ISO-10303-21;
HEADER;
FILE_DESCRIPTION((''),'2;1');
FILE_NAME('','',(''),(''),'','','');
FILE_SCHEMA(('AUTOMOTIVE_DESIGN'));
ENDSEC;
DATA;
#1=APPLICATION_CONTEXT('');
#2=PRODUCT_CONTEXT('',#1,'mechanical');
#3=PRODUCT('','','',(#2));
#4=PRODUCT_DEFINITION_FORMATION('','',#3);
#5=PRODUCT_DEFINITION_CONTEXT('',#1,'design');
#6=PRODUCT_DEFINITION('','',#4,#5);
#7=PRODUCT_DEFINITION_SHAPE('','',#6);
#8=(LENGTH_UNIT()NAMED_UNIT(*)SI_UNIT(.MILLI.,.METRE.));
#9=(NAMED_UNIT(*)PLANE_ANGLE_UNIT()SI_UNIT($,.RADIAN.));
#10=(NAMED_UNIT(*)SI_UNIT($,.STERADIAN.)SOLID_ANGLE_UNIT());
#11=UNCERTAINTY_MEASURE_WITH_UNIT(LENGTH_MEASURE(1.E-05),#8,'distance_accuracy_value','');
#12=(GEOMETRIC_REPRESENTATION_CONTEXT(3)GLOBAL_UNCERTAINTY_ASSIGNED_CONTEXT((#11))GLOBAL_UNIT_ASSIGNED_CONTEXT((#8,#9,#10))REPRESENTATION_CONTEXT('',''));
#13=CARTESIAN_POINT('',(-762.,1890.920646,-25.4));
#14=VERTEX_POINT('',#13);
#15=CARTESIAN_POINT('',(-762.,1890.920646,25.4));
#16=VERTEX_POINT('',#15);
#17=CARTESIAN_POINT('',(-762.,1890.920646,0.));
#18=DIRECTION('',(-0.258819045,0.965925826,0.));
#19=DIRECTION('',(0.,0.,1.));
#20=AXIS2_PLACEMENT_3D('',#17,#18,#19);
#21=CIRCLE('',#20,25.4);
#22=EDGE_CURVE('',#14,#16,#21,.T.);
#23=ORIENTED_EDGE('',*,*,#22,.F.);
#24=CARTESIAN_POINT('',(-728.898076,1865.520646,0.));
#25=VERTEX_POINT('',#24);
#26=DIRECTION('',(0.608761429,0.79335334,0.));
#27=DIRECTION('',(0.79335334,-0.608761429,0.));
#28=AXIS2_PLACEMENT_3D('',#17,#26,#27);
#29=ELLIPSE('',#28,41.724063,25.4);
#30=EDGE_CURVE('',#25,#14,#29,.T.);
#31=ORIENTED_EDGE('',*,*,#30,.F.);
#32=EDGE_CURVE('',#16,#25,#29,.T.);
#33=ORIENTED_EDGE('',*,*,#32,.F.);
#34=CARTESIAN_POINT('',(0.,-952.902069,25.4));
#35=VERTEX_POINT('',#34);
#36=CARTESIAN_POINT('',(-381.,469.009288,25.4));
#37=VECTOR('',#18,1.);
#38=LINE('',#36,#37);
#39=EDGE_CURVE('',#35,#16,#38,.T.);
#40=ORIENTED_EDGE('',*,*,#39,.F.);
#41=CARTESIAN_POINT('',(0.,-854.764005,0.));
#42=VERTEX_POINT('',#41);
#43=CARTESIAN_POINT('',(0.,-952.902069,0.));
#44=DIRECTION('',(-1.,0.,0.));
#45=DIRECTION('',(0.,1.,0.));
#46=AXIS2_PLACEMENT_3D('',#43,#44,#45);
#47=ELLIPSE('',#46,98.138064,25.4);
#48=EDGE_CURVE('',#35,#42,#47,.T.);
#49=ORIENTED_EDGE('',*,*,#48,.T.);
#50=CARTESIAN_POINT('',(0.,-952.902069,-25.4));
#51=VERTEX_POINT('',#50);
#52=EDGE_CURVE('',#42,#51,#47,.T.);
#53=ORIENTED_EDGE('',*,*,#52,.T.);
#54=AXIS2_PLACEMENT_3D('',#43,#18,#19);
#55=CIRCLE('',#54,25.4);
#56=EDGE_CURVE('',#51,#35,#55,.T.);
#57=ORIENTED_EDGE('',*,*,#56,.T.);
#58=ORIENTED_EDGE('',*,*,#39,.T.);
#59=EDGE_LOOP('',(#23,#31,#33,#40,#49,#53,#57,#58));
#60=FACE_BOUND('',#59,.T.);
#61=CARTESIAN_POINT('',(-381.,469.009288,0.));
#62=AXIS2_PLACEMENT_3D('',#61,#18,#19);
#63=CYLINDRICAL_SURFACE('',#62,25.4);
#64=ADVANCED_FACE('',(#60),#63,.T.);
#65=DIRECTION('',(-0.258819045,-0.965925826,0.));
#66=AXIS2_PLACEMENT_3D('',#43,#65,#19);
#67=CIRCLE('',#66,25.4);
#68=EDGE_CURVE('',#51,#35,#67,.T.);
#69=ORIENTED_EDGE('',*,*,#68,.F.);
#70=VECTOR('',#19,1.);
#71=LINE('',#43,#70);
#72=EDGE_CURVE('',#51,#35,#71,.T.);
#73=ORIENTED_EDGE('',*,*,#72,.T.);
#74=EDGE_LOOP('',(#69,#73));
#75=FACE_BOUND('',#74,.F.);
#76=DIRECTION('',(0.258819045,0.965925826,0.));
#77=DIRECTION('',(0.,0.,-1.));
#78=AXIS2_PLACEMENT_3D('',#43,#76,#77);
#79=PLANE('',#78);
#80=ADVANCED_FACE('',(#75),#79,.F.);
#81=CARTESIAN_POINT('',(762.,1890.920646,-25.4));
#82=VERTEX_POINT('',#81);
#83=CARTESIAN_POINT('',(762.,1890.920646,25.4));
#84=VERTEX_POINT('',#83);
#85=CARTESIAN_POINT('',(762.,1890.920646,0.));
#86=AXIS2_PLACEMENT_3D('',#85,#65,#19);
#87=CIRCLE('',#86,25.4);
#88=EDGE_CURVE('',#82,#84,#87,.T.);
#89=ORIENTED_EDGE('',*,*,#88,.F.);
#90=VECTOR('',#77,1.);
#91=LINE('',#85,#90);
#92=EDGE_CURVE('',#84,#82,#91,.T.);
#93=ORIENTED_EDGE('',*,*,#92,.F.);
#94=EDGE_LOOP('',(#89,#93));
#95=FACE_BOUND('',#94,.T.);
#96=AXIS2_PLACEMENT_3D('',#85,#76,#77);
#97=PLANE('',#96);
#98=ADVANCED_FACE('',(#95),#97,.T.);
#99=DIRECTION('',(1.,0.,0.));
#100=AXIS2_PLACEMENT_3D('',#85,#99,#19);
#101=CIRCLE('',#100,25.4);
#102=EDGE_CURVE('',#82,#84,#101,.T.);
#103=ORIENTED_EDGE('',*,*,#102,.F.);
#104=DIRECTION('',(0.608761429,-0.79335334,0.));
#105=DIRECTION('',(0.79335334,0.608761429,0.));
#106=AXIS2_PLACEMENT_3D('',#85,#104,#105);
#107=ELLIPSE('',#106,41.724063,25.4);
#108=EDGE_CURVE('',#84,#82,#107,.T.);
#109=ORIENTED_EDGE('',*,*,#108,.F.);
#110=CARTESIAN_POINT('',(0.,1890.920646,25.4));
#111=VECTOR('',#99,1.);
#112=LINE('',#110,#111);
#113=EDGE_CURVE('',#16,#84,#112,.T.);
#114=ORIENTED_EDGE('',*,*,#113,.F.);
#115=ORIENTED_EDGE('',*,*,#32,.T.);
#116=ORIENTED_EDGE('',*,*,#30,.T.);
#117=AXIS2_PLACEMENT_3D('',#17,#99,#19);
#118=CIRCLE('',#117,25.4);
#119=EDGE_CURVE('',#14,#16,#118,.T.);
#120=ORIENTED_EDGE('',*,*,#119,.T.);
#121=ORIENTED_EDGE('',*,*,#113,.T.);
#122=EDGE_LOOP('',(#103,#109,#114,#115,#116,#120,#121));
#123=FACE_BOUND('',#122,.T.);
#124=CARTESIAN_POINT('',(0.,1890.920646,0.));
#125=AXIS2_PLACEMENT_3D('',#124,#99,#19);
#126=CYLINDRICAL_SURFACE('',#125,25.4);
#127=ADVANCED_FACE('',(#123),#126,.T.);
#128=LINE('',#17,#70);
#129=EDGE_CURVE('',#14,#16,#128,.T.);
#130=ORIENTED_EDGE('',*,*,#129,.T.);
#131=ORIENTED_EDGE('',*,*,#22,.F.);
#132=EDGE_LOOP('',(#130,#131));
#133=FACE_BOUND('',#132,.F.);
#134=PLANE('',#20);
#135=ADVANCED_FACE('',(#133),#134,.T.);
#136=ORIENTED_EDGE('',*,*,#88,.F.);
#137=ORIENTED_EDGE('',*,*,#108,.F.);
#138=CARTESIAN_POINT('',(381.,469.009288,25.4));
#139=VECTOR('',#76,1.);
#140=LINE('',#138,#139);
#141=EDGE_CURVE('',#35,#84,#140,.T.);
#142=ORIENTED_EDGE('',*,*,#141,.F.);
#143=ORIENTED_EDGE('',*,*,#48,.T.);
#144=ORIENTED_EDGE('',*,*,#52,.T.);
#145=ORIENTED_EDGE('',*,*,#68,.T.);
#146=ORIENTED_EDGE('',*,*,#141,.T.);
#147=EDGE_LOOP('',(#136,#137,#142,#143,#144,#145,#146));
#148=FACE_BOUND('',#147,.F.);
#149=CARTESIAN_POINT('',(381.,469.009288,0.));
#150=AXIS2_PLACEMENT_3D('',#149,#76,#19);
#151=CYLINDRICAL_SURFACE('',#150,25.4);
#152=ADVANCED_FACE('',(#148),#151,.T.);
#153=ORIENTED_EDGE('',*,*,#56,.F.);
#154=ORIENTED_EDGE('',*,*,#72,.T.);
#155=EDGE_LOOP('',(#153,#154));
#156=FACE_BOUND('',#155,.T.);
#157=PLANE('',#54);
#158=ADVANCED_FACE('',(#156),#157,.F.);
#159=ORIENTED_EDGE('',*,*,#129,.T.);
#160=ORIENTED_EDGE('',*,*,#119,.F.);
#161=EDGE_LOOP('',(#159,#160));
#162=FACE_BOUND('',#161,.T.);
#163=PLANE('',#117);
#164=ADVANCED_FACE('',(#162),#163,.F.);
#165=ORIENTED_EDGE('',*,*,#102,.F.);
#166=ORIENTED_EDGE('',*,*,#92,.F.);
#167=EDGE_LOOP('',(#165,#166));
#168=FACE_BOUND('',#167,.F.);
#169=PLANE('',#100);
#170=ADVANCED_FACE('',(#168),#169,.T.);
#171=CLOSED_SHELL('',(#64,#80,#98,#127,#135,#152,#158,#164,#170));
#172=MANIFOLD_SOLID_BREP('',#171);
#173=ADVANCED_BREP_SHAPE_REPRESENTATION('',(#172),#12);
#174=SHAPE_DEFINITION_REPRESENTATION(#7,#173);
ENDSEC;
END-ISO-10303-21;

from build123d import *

# Parameters (mm, degrees)
F4_E2_W = 1524
F4_E2_H = 25.4
F3_E1_W = 2944.1419185291
F3_E1_H = 25.4


# Not quite as in the source:
# - a feature of the source that left no trace in its solid (it failed there, or was rolled back) is left out
# - a pattern or mirror of a feature is missing from the dataset's text; its kind, count and spacing are read off the source's solid


with BuildPart() as f5:
    # F4_E2 (on explicit) → F5 (revolve)
    with BuildSketch(Plane(origin=(-762, 1890.9206461344, 0), x_dir=(1, 0, 0), z_dir=(0, -1, 0))):
        with Locations((762, 12.7)):
            Rectangle(F4_E2_W, F4_E2_H)
    revolve(axis=Axis((0, 1890.9206461344, 0), (1, 0, 0)))

    # F3_E1 (on explicit) → F6 (revolve)
    with BuildSketch(Plane(origin=(0, -952.9020692331, 0), x_dir=(-0.2588190451, 0.9659258263, 0), z_dir=(0.9659258263, 0.2588190451, 0))):
        with Locations((1472.0709592645, 12.7)):
            Rectangle(F3_E1_W, F3_E1_H)
    f6 = revolve(axis=Axis((-381, 469.0092884507, 0), (-0.2588190451, 0.9659258263, 0)))

    # F6_copies: F6 across plane
    add(f6.mirror(Plane(origin=(0, 0, 0), x_dir=(0, 0, 1), z_dir=(1, 0, 0))))


solid = f5.part
